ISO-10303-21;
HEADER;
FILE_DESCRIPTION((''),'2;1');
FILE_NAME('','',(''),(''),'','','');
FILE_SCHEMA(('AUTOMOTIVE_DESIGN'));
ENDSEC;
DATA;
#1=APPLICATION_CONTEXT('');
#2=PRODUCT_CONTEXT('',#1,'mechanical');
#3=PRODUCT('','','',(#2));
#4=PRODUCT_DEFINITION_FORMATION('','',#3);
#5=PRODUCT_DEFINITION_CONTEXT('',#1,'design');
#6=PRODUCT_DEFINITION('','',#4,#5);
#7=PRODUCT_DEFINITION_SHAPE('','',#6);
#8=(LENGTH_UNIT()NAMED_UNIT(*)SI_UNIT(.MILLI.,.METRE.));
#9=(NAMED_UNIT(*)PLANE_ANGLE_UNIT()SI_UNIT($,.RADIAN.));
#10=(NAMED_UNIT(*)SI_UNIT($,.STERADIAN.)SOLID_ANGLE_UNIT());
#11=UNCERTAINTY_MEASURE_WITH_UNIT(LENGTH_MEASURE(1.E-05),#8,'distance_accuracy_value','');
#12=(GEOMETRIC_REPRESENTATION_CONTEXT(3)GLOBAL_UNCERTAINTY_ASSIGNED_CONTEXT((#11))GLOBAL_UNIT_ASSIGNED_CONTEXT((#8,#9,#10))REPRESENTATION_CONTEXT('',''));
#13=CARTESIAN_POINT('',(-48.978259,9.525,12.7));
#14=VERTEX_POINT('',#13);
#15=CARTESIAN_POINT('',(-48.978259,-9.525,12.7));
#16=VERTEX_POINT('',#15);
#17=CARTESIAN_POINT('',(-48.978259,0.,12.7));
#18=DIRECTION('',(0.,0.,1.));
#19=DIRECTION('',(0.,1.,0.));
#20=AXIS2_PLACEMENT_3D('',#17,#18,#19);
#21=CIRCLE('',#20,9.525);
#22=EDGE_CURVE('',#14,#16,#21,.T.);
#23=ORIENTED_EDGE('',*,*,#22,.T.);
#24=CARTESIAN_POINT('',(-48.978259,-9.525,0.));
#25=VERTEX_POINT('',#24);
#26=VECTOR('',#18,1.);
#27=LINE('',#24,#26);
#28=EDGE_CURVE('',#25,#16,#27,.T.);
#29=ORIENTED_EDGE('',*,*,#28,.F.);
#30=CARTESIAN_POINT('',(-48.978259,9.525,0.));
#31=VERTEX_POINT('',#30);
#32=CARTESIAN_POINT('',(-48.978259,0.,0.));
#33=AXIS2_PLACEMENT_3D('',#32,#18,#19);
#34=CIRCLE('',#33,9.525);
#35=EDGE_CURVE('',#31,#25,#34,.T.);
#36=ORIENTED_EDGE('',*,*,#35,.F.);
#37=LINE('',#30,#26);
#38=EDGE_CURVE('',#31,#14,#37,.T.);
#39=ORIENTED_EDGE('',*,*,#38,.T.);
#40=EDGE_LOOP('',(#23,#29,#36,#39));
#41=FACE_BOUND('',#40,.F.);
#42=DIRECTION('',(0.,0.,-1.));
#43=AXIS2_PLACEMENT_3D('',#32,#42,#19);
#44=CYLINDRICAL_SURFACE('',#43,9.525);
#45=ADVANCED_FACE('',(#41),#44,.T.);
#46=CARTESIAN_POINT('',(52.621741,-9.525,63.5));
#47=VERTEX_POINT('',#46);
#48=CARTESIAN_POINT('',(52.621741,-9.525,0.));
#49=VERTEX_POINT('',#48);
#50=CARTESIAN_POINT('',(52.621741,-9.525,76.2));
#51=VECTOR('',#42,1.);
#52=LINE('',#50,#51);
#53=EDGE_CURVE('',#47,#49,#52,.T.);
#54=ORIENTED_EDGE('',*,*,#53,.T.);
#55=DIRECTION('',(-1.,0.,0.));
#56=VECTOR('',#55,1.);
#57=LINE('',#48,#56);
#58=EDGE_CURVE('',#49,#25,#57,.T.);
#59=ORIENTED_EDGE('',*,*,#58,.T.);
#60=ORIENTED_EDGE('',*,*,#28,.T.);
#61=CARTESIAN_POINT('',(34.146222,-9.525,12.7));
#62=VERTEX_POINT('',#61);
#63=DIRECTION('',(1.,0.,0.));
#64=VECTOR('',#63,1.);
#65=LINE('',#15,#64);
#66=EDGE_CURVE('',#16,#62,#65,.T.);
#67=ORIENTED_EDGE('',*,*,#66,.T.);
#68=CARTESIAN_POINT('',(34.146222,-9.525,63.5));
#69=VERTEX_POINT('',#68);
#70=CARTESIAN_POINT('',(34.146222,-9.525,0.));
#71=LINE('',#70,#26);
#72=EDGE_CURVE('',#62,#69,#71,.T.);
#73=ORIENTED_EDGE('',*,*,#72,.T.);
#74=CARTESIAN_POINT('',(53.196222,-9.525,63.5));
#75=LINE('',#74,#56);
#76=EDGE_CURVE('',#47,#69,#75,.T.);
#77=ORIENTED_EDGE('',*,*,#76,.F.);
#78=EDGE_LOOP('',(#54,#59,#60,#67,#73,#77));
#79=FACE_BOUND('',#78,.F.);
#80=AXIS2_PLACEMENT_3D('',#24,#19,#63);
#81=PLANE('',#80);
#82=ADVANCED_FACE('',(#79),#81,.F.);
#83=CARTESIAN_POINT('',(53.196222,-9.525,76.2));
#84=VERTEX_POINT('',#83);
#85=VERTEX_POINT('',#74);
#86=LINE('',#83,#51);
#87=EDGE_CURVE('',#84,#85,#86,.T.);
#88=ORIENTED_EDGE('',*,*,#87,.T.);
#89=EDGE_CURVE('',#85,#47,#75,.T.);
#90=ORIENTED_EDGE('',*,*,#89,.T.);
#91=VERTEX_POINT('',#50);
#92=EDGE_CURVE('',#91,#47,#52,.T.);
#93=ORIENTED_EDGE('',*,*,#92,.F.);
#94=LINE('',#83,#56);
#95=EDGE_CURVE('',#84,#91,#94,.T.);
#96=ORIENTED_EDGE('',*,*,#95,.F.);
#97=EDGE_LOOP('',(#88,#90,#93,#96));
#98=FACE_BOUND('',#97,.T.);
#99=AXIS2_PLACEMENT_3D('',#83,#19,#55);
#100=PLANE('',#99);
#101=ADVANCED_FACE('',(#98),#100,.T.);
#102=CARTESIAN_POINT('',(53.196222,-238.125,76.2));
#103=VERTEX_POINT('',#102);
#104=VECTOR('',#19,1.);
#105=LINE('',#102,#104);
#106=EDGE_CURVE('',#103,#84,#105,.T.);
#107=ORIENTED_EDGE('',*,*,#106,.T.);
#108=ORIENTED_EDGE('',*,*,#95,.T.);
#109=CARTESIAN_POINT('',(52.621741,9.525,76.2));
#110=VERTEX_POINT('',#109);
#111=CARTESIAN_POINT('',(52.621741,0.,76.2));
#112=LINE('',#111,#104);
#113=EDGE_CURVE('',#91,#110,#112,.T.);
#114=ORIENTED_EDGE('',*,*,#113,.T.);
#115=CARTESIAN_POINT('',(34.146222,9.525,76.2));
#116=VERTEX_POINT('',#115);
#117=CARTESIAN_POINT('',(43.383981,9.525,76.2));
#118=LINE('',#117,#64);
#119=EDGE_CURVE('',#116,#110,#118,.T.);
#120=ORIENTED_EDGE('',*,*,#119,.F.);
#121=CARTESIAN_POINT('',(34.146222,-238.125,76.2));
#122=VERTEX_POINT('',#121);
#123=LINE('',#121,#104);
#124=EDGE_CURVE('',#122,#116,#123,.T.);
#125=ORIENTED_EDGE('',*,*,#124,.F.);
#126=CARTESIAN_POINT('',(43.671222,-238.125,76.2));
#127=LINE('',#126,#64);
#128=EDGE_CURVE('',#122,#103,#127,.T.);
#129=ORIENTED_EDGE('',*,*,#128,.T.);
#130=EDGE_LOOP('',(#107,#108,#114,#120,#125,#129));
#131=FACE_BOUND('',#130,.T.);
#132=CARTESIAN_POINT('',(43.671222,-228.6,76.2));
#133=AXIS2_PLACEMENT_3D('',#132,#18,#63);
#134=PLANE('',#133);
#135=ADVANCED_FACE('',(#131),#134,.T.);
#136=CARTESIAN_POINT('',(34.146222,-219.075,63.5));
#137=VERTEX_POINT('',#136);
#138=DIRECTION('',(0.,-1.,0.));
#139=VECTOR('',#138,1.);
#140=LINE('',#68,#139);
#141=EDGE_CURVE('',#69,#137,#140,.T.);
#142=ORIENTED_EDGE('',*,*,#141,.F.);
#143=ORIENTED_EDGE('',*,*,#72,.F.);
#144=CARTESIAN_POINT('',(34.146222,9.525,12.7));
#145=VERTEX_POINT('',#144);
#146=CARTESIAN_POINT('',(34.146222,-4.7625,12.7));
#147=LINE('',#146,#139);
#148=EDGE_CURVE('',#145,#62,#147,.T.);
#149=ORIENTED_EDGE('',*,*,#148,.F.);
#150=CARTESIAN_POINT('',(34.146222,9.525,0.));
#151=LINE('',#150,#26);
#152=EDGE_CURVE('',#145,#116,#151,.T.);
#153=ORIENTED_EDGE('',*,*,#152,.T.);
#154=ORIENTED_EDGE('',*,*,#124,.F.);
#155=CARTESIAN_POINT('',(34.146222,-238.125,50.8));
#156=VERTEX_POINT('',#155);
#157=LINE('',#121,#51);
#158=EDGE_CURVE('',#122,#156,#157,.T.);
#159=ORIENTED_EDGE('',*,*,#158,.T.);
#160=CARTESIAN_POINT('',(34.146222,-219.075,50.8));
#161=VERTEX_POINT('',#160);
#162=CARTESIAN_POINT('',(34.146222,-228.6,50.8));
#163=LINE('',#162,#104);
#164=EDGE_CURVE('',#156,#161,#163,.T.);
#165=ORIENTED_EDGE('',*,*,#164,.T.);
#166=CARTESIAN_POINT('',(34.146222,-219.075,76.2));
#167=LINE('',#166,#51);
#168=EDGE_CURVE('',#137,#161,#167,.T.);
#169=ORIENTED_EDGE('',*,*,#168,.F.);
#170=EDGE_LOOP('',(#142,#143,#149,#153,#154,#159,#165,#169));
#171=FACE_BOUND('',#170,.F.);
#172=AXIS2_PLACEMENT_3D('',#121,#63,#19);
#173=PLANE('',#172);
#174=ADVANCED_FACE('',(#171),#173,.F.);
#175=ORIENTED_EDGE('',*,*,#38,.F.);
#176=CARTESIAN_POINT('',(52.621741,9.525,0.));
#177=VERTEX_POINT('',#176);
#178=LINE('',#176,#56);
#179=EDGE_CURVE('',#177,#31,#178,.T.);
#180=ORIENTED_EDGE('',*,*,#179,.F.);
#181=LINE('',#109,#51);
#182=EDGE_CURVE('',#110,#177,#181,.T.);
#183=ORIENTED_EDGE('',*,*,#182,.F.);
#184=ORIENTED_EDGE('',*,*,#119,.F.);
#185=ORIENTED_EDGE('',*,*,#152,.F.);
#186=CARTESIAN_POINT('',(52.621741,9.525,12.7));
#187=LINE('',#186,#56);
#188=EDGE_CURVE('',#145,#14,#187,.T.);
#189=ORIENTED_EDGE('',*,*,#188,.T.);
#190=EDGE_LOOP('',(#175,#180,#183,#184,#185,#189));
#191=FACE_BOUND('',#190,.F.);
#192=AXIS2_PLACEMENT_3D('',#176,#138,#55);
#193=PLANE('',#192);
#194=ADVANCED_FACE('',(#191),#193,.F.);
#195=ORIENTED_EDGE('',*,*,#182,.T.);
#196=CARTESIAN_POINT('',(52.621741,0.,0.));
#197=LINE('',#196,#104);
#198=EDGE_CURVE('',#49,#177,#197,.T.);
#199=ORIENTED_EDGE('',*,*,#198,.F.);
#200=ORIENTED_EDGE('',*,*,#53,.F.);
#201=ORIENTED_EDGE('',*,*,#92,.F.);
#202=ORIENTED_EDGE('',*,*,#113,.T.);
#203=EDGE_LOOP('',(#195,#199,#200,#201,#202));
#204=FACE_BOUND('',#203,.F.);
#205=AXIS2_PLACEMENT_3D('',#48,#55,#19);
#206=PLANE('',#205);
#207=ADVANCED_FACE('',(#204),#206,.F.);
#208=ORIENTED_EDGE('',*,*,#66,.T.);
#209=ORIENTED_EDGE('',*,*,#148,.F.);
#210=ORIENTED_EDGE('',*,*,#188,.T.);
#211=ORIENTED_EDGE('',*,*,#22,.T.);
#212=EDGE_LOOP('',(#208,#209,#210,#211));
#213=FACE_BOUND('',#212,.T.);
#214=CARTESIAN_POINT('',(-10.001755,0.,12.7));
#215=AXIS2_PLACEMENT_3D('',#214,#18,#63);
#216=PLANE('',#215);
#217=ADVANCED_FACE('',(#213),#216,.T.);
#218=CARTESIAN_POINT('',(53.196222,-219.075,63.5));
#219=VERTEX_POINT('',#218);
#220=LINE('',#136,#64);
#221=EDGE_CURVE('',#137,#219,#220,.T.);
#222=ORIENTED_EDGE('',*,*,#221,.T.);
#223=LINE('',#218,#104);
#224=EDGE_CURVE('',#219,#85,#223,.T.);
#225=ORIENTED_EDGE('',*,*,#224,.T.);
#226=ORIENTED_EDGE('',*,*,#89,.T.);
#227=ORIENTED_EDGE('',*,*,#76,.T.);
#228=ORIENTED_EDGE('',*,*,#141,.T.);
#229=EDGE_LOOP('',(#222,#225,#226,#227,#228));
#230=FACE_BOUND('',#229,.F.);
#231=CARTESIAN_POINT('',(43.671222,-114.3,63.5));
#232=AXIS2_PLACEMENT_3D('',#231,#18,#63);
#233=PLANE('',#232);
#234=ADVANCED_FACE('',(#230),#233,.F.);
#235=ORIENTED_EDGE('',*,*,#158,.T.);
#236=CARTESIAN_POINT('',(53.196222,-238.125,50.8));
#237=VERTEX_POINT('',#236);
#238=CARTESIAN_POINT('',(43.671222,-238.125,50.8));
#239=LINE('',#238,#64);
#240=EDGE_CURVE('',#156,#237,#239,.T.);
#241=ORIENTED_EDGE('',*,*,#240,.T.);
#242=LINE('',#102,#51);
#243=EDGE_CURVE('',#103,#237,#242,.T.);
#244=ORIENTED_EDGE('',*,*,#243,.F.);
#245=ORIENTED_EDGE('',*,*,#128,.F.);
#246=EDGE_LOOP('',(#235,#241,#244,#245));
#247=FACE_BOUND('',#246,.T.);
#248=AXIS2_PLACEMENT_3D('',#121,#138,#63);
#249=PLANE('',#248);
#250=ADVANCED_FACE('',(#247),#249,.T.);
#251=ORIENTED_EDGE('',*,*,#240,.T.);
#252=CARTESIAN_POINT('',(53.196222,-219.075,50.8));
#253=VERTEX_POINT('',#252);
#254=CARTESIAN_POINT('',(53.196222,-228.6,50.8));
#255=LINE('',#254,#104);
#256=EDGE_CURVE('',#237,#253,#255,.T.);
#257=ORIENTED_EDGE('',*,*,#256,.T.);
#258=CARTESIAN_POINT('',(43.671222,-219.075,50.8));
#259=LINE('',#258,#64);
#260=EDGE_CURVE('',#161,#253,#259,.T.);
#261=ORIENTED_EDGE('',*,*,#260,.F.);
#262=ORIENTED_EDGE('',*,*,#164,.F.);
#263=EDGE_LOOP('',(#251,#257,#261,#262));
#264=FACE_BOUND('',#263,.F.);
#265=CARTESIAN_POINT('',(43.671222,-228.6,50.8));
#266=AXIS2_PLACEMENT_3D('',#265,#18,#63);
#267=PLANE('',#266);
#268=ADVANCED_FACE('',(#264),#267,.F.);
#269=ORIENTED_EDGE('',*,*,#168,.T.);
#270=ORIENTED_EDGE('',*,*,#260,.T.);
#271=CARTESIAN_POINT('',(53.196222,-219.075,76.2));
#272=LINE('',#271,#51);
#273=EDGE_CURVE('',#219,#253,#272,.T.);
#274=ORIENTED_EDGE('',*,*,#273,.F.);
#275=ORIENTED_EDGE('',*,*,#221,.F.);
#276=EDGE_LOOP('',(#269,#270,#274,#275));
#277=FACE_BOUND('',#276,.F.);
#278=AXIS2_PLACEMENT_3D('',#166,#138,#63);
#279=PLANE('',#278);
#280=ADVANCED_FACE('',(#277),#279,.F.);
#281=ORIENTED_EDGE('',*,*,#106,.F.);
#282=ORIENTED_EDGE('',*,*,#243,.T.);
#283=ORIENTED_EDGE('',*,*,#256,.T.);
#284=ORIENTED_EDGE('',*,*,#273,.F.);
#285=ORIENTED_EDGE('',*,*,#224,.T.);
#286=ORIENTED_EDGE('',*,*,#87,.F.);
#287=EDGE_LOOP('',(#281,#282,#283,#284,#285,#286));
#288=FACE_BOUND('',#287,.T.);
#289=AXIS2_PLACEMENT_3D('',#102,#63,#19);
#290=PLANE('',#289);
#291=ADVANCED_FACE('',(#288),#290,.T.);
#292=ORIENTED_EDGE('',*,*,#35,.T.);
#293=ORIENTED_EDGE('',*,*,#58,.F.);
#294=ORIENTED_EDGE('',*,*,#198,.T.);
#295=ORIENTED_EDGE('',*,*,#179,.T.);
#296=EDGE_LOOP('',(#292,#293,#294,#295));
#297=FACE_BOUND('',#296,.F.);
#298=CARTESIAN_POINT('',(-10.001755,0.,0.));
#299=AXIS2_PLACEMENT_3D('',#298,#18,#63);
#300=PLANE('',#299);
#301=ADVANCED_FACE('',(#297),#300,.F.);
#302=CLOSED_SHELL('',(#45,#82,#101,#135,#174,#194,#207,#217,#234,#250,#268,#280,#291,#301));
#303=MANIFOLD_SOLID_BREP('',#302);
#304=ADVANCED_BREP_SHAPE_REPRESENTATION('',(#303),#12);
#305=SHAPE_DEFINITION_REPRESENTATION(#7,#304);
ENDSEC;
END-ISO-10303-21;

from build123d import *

# Parameters (mm, degrees)
F0_W     = 18.4755190939
F0_H     = 19.05
F1_DEPTH = 12.7
F2_DEPTH = 76.2
F4_DEPTH = 12.7
F3_W     = 19.05
F3_H     = 19.05
F5_DEPTH = 25.4


# Not quite as in the source:
# - a feature names something its author has since deleted; it is built from what else it names


with BuildPart() as f1:
    # F0 (on Top) → F1 (new body)
    with BuildSketch(Plane.XY):
        with BuildLine():
            Line((34.1462217655, 9.525), (-48.9782591407, 9.525))
            ThreePointArc((-48.9782591407, 9.525), (-58.5032591407, 0), (-48.9782591407, -9.525))
            Line((-48.9782591407, -9.525), (34.1462217655, -9.525))
            Line((34.1462217655, -9.525), (34.1462217655, 9.525))
        make_face()
        with Locations((43.3839813124, 0)):
            Rectangle(F0_W, F0_H)
    extrude(amount=F1_DEPTH)

    # F0 (on Top) → F2 (join)
    with BuildSketch(Plane.XY):
        with Locations((43.3839813124, 0)):
            Rectangle(F0_W, F0_H)
    extrude(amount=F2_DEPTH)

    # F3 (on face) → F4 (join)
    with BuildSketch(Plane.XY.offset(76.2)):
        Polygon((52.6217408593, -9.525), (34.1462217655, -9.525), (34.1462217655, -219.075), (53.1962217655, -219.075), (53.1962217655, -9.525), align=None)
    extrude(amount=-F4_DEPTH)

    # F3 (on face) → F5 (join)
    with BuildSketch(Plane.XY.offset(76.2)):
        with Locations((43.6712217655, -228.6)):
            Rectangle(F3_W, F3_H)
    extrude(amount=-F5_DEPTH)


with BuildPart() as f6_1:
    # F6: copy of F1
    add(f1.part)


solid = f1.part
